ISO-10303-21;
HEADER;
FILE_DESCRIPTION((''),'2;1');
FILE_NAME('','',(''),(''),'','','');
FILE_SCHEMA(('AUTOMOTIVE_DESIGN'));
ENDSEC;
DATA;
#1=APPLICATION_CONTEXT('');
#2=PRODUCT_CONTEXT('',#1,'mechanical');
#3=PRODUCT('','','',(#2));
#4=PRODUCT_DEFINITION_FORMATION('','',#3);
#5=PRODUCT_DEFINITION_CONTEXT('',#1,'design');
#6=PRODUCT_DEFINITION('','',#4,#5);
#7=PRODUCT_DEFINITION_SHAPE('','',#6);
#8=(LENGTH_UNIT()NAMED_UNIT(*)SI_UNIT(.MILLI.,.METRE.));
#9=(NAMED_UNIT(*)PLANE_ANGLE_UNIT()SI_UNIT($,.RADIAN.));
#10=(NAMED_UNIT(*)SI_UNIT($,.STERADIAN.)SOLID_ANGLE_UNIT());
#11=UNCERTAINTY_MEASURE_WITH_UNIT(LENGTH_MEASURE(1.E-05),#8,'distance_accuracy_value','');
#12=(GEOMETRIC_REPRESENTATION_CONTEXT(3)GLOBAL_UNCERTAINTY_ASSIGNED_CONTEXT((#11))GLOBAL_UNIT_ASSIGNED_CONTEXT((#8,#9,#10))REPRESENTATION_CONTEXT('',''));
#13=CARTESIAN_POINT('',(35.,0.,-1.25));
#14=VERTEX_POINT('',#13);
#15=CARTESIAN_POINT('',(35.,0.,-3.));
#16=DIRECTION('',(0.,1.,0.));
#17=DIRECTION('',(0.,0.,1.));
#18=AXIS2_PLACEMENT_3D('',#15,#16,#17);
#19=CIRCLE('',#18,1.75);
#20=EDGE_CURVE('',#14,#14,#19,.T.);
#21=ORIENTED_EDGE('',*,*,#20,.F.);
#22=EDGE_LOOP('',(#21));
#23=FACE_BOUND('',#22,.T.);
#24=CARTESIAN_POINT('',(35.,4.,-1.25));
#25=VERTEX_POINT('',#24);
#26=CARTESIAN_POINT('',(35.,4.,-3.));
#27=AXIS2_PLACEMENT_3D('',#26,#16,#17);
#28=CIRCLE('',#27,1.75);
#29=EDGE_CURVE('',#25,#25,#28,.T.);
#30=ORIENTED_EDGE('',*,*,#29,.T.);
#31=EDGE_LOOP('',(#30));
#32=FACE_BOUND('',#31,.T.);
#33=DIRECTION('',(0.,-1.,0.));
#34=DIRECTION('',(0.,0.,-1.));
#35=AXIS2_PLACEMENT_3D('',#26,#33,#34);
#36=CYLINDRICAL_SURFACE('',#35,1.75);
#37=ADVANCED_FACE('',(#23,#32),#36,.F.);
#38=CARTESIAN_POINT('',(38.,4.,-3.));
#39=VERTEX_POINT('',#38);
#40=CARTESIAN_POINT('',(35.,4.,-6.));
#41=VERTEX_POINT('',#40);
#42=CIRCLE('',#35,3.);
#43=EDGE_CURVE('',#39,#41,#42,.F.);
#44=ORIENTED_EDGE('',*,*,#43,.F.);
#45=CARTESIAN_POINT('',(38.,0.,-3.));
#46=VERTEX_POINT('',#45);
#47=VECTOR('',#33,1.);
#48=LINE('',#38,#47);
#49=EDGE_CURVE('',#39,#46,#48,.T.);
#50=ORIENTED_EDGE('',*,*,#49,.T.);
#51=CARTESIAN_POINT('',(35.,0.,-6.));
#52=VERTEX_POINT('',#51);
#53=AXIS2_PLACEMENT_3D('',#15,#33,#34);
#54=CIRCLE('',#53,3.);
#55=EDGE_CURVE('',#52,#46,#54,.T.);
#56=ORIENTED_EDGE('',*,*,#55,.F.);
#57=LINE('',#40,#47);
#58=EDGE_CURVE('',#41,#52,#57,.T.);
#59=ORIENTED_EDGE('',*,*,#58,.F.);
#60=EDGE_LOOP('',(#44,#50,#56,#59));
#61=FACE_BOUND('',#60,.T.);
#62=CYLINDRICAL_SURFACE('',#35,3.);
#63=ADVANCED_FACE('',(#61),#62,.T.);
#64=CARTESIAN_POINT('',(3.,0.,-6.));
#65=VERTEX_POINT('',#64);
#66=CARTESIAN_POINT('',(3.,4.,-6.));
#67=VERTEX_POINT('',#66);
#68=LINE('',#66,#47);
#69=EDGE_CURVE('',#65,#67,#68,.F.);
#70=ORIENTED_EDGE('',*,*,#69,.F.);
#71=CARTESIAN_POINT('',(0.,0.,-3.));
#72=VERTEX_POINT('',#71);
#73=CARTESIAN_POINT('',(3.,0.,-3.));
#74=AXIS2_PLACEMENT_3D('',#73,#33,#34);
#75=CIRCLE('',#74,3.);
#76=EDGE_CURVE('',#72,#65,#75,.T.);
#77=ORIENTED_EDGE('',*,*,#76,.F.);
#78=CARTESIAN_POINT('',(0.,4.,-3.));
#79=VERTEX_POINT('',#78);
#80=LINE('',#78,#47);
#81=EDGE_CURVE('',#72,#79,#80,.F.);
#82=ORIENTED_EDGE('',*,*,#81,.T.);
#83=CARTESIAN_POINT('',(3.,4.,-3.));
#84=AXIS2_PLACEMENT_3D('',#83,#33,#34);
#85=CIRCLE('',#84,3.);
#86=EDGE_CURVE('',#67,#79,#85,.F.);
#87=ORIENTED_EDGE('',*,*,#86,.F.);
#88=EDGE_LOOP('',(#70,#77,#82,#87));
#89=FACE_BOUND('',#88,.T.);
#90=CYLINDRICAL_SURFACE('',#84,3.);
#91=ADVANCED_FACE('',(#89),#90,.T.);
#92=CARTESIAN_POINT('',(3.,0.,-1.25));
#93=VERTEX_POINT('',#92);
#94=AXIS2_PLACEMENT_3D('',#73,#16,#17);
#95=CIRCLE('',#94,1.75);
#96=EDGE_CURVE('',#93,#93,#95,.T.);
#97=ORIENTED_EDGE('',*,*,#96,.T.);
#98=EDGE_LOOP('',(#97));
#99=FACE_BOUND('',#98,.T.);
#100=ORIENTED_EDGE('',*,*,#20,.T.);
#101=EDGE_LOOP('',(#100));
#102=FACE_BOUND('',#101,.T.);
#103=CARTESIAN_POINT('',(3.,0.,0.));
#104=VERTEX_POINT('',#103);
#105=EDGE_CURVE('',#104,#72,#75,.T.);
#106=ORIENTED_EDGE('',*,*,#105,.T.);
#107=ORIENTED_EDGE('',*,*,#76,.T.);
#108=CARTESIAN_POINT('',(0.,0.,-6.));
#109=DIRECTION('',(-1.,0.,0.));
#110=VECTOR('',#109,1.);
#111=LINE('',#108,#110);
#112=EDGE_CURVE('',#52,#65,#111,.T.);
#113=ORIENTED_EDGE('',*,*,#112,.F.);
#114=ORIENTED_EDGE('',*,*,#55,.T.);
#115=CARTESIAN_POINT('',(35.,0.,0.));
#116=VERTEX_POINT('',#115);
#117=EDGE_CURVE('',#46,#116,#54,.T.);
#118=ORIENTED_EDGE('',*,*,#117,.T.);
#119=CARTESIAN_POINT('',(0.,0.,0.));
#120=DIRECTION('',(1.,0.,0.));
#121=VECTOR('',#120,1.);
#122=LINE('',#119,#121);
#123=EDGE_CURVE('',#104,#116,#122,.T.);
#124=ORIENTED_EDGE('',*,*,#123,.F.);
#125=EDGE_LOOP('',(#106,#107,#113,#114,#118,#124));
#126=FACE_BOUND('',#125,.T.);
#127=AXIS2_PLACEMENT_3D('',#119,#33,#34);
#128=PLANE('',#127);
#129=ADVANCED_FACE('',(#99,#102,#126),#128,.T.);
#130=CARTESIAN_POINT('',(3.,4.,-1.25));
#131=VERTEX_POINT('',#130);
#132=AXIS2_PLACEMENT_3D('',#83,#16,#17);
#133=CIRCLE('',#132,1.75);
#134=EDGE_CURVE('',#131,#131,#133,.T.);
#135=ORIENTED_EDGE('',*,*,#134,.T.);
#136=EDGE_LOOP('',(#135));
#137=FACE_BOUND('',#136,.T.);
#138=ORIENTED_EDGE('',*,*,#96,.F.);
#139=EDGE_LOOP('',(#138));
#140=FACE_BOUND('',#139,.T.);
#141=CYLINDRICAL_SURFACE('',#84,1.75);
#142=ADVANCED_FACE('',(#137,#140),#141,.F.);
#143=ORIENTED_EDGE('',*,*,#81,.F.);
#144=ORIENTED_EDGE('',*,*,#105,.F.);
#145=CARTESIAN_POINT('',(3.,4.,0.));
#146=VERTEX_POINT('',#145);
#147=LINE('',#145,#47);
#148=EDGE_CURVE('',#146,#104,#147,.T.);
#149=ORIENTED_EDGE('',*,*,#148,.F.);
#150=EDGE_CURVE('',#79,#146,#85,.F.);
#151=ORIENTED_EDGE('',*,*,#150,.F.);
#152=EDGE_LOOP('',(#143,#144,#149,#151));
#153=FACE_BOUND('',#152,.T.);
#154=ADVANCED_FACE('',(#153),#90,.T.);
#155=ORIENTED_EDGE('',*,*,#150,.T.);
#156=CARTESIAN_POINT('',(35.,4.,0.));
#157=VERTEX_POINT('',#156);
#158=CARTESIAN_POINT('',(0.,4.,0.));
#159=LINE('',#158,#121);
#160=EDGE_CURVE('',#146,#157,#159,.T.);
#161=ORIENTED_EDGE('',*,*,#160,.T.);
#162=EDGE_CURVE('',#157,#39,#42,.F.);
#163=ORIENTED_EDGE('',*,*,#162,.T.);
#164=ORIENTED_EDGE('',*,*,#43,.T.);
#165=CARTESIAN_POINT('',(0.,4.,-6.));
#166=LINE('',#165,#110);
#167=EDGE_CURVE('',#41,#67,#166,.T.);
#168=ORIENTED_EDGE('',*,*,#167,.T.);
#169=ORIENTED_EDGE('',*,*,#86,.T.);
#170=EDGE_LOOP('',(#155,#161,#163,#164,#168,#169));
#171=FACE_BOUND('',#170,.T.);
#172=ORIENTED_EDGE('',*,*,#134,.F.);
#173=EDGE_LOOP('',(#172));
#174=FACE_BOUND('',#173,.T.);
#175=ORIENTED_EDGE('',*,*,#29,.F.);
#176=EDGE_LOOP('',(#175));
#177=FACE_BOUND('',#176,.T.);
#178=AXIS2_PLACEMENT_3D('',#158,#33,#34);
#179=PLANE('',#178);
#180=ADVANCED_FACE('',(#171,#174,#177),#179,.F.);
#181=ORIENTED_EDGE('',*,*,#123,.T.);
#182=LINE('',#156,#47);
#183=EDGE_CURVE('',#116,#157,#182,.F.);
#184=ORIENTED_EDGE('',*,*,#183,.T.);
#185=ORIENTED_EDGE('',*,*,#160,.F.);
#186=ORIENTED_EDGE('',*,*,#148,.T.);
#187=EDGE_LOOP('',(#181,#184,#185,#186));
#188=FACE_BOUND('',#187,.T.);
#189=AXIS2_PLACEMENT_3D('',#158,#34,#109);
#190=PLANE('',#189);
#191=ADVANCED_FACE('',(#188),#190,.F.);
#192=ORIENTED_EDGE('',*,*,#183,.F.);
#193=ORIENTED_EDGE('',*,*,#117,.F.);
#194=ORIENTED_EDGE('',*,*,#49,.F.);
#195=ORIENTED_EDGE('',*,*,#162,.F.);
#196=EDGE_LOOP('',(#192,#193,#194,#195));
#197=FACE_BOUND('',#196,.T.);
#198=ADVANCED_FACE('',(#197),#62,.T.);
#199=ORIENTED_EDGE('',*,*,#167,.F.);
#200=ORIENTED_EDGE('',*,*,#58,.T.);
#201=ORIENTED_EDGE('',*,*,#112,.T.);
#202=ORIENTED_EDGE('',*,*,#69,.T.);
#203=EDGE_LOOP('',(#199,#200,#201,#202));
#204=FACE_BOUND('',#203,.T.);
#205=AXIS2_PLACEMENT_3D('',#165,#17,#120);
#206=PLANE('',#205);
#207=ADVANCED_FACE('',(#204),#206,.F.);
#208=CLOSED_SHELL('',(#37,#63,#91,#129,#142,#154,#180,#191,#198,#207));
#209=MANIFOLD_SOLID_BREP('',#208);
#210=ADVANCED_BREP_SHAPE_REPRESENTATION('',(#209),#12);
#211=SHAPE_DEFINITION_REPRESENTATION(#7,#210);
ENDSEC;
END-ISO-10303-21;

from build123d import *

# Parameters (mm, degrees)
CROQUIS1_W              = 38
CROQUIS1_H              = 6
CROQUIS1_R              = 1.75
SALIENTE_EXTRUIR1_DEPTH = 4
REDONDEO1_R             = 3


with BuildPart() as part:
    # Croquis1 → Saliente-Extruir1 (new body)
    with BuildSketch(Plane(origin=(0, 0, 0), x_dir=(1, 0, 0), z_dir=(0, 1, 0))):
        with Locations((19, 3)):
            Rectangle(CROQUIS1_W, CROQUIS1_H)
        with Locations(Location((3, 3, 0), (0, 0, 270))):
            Circle(CROQUIS1_R, mode=Mode.SUBTRACT)
        with Locations(Location((35, 3, 0), (0, 0, 270))):
            Circle(CROQUIS1_R, mode=Mode.SUBTRACT)
    extrude(amount=SALIENTE_EXTRUIR1_DEPTH)

    # Redondeo1
    redondeo1_edges = [part.edges().sort_by_distance(p)[0] for p in [
        (38, 2, -6),
        (38, 2, 0),
        (0, 2, -6),
        (0, 2, 0),
    ]]
    fillet(redondeo1_edges, radius=REDONDEO1_R - 0.0001)  # a hair under: the kernel refuses the full size


solid = part.part
